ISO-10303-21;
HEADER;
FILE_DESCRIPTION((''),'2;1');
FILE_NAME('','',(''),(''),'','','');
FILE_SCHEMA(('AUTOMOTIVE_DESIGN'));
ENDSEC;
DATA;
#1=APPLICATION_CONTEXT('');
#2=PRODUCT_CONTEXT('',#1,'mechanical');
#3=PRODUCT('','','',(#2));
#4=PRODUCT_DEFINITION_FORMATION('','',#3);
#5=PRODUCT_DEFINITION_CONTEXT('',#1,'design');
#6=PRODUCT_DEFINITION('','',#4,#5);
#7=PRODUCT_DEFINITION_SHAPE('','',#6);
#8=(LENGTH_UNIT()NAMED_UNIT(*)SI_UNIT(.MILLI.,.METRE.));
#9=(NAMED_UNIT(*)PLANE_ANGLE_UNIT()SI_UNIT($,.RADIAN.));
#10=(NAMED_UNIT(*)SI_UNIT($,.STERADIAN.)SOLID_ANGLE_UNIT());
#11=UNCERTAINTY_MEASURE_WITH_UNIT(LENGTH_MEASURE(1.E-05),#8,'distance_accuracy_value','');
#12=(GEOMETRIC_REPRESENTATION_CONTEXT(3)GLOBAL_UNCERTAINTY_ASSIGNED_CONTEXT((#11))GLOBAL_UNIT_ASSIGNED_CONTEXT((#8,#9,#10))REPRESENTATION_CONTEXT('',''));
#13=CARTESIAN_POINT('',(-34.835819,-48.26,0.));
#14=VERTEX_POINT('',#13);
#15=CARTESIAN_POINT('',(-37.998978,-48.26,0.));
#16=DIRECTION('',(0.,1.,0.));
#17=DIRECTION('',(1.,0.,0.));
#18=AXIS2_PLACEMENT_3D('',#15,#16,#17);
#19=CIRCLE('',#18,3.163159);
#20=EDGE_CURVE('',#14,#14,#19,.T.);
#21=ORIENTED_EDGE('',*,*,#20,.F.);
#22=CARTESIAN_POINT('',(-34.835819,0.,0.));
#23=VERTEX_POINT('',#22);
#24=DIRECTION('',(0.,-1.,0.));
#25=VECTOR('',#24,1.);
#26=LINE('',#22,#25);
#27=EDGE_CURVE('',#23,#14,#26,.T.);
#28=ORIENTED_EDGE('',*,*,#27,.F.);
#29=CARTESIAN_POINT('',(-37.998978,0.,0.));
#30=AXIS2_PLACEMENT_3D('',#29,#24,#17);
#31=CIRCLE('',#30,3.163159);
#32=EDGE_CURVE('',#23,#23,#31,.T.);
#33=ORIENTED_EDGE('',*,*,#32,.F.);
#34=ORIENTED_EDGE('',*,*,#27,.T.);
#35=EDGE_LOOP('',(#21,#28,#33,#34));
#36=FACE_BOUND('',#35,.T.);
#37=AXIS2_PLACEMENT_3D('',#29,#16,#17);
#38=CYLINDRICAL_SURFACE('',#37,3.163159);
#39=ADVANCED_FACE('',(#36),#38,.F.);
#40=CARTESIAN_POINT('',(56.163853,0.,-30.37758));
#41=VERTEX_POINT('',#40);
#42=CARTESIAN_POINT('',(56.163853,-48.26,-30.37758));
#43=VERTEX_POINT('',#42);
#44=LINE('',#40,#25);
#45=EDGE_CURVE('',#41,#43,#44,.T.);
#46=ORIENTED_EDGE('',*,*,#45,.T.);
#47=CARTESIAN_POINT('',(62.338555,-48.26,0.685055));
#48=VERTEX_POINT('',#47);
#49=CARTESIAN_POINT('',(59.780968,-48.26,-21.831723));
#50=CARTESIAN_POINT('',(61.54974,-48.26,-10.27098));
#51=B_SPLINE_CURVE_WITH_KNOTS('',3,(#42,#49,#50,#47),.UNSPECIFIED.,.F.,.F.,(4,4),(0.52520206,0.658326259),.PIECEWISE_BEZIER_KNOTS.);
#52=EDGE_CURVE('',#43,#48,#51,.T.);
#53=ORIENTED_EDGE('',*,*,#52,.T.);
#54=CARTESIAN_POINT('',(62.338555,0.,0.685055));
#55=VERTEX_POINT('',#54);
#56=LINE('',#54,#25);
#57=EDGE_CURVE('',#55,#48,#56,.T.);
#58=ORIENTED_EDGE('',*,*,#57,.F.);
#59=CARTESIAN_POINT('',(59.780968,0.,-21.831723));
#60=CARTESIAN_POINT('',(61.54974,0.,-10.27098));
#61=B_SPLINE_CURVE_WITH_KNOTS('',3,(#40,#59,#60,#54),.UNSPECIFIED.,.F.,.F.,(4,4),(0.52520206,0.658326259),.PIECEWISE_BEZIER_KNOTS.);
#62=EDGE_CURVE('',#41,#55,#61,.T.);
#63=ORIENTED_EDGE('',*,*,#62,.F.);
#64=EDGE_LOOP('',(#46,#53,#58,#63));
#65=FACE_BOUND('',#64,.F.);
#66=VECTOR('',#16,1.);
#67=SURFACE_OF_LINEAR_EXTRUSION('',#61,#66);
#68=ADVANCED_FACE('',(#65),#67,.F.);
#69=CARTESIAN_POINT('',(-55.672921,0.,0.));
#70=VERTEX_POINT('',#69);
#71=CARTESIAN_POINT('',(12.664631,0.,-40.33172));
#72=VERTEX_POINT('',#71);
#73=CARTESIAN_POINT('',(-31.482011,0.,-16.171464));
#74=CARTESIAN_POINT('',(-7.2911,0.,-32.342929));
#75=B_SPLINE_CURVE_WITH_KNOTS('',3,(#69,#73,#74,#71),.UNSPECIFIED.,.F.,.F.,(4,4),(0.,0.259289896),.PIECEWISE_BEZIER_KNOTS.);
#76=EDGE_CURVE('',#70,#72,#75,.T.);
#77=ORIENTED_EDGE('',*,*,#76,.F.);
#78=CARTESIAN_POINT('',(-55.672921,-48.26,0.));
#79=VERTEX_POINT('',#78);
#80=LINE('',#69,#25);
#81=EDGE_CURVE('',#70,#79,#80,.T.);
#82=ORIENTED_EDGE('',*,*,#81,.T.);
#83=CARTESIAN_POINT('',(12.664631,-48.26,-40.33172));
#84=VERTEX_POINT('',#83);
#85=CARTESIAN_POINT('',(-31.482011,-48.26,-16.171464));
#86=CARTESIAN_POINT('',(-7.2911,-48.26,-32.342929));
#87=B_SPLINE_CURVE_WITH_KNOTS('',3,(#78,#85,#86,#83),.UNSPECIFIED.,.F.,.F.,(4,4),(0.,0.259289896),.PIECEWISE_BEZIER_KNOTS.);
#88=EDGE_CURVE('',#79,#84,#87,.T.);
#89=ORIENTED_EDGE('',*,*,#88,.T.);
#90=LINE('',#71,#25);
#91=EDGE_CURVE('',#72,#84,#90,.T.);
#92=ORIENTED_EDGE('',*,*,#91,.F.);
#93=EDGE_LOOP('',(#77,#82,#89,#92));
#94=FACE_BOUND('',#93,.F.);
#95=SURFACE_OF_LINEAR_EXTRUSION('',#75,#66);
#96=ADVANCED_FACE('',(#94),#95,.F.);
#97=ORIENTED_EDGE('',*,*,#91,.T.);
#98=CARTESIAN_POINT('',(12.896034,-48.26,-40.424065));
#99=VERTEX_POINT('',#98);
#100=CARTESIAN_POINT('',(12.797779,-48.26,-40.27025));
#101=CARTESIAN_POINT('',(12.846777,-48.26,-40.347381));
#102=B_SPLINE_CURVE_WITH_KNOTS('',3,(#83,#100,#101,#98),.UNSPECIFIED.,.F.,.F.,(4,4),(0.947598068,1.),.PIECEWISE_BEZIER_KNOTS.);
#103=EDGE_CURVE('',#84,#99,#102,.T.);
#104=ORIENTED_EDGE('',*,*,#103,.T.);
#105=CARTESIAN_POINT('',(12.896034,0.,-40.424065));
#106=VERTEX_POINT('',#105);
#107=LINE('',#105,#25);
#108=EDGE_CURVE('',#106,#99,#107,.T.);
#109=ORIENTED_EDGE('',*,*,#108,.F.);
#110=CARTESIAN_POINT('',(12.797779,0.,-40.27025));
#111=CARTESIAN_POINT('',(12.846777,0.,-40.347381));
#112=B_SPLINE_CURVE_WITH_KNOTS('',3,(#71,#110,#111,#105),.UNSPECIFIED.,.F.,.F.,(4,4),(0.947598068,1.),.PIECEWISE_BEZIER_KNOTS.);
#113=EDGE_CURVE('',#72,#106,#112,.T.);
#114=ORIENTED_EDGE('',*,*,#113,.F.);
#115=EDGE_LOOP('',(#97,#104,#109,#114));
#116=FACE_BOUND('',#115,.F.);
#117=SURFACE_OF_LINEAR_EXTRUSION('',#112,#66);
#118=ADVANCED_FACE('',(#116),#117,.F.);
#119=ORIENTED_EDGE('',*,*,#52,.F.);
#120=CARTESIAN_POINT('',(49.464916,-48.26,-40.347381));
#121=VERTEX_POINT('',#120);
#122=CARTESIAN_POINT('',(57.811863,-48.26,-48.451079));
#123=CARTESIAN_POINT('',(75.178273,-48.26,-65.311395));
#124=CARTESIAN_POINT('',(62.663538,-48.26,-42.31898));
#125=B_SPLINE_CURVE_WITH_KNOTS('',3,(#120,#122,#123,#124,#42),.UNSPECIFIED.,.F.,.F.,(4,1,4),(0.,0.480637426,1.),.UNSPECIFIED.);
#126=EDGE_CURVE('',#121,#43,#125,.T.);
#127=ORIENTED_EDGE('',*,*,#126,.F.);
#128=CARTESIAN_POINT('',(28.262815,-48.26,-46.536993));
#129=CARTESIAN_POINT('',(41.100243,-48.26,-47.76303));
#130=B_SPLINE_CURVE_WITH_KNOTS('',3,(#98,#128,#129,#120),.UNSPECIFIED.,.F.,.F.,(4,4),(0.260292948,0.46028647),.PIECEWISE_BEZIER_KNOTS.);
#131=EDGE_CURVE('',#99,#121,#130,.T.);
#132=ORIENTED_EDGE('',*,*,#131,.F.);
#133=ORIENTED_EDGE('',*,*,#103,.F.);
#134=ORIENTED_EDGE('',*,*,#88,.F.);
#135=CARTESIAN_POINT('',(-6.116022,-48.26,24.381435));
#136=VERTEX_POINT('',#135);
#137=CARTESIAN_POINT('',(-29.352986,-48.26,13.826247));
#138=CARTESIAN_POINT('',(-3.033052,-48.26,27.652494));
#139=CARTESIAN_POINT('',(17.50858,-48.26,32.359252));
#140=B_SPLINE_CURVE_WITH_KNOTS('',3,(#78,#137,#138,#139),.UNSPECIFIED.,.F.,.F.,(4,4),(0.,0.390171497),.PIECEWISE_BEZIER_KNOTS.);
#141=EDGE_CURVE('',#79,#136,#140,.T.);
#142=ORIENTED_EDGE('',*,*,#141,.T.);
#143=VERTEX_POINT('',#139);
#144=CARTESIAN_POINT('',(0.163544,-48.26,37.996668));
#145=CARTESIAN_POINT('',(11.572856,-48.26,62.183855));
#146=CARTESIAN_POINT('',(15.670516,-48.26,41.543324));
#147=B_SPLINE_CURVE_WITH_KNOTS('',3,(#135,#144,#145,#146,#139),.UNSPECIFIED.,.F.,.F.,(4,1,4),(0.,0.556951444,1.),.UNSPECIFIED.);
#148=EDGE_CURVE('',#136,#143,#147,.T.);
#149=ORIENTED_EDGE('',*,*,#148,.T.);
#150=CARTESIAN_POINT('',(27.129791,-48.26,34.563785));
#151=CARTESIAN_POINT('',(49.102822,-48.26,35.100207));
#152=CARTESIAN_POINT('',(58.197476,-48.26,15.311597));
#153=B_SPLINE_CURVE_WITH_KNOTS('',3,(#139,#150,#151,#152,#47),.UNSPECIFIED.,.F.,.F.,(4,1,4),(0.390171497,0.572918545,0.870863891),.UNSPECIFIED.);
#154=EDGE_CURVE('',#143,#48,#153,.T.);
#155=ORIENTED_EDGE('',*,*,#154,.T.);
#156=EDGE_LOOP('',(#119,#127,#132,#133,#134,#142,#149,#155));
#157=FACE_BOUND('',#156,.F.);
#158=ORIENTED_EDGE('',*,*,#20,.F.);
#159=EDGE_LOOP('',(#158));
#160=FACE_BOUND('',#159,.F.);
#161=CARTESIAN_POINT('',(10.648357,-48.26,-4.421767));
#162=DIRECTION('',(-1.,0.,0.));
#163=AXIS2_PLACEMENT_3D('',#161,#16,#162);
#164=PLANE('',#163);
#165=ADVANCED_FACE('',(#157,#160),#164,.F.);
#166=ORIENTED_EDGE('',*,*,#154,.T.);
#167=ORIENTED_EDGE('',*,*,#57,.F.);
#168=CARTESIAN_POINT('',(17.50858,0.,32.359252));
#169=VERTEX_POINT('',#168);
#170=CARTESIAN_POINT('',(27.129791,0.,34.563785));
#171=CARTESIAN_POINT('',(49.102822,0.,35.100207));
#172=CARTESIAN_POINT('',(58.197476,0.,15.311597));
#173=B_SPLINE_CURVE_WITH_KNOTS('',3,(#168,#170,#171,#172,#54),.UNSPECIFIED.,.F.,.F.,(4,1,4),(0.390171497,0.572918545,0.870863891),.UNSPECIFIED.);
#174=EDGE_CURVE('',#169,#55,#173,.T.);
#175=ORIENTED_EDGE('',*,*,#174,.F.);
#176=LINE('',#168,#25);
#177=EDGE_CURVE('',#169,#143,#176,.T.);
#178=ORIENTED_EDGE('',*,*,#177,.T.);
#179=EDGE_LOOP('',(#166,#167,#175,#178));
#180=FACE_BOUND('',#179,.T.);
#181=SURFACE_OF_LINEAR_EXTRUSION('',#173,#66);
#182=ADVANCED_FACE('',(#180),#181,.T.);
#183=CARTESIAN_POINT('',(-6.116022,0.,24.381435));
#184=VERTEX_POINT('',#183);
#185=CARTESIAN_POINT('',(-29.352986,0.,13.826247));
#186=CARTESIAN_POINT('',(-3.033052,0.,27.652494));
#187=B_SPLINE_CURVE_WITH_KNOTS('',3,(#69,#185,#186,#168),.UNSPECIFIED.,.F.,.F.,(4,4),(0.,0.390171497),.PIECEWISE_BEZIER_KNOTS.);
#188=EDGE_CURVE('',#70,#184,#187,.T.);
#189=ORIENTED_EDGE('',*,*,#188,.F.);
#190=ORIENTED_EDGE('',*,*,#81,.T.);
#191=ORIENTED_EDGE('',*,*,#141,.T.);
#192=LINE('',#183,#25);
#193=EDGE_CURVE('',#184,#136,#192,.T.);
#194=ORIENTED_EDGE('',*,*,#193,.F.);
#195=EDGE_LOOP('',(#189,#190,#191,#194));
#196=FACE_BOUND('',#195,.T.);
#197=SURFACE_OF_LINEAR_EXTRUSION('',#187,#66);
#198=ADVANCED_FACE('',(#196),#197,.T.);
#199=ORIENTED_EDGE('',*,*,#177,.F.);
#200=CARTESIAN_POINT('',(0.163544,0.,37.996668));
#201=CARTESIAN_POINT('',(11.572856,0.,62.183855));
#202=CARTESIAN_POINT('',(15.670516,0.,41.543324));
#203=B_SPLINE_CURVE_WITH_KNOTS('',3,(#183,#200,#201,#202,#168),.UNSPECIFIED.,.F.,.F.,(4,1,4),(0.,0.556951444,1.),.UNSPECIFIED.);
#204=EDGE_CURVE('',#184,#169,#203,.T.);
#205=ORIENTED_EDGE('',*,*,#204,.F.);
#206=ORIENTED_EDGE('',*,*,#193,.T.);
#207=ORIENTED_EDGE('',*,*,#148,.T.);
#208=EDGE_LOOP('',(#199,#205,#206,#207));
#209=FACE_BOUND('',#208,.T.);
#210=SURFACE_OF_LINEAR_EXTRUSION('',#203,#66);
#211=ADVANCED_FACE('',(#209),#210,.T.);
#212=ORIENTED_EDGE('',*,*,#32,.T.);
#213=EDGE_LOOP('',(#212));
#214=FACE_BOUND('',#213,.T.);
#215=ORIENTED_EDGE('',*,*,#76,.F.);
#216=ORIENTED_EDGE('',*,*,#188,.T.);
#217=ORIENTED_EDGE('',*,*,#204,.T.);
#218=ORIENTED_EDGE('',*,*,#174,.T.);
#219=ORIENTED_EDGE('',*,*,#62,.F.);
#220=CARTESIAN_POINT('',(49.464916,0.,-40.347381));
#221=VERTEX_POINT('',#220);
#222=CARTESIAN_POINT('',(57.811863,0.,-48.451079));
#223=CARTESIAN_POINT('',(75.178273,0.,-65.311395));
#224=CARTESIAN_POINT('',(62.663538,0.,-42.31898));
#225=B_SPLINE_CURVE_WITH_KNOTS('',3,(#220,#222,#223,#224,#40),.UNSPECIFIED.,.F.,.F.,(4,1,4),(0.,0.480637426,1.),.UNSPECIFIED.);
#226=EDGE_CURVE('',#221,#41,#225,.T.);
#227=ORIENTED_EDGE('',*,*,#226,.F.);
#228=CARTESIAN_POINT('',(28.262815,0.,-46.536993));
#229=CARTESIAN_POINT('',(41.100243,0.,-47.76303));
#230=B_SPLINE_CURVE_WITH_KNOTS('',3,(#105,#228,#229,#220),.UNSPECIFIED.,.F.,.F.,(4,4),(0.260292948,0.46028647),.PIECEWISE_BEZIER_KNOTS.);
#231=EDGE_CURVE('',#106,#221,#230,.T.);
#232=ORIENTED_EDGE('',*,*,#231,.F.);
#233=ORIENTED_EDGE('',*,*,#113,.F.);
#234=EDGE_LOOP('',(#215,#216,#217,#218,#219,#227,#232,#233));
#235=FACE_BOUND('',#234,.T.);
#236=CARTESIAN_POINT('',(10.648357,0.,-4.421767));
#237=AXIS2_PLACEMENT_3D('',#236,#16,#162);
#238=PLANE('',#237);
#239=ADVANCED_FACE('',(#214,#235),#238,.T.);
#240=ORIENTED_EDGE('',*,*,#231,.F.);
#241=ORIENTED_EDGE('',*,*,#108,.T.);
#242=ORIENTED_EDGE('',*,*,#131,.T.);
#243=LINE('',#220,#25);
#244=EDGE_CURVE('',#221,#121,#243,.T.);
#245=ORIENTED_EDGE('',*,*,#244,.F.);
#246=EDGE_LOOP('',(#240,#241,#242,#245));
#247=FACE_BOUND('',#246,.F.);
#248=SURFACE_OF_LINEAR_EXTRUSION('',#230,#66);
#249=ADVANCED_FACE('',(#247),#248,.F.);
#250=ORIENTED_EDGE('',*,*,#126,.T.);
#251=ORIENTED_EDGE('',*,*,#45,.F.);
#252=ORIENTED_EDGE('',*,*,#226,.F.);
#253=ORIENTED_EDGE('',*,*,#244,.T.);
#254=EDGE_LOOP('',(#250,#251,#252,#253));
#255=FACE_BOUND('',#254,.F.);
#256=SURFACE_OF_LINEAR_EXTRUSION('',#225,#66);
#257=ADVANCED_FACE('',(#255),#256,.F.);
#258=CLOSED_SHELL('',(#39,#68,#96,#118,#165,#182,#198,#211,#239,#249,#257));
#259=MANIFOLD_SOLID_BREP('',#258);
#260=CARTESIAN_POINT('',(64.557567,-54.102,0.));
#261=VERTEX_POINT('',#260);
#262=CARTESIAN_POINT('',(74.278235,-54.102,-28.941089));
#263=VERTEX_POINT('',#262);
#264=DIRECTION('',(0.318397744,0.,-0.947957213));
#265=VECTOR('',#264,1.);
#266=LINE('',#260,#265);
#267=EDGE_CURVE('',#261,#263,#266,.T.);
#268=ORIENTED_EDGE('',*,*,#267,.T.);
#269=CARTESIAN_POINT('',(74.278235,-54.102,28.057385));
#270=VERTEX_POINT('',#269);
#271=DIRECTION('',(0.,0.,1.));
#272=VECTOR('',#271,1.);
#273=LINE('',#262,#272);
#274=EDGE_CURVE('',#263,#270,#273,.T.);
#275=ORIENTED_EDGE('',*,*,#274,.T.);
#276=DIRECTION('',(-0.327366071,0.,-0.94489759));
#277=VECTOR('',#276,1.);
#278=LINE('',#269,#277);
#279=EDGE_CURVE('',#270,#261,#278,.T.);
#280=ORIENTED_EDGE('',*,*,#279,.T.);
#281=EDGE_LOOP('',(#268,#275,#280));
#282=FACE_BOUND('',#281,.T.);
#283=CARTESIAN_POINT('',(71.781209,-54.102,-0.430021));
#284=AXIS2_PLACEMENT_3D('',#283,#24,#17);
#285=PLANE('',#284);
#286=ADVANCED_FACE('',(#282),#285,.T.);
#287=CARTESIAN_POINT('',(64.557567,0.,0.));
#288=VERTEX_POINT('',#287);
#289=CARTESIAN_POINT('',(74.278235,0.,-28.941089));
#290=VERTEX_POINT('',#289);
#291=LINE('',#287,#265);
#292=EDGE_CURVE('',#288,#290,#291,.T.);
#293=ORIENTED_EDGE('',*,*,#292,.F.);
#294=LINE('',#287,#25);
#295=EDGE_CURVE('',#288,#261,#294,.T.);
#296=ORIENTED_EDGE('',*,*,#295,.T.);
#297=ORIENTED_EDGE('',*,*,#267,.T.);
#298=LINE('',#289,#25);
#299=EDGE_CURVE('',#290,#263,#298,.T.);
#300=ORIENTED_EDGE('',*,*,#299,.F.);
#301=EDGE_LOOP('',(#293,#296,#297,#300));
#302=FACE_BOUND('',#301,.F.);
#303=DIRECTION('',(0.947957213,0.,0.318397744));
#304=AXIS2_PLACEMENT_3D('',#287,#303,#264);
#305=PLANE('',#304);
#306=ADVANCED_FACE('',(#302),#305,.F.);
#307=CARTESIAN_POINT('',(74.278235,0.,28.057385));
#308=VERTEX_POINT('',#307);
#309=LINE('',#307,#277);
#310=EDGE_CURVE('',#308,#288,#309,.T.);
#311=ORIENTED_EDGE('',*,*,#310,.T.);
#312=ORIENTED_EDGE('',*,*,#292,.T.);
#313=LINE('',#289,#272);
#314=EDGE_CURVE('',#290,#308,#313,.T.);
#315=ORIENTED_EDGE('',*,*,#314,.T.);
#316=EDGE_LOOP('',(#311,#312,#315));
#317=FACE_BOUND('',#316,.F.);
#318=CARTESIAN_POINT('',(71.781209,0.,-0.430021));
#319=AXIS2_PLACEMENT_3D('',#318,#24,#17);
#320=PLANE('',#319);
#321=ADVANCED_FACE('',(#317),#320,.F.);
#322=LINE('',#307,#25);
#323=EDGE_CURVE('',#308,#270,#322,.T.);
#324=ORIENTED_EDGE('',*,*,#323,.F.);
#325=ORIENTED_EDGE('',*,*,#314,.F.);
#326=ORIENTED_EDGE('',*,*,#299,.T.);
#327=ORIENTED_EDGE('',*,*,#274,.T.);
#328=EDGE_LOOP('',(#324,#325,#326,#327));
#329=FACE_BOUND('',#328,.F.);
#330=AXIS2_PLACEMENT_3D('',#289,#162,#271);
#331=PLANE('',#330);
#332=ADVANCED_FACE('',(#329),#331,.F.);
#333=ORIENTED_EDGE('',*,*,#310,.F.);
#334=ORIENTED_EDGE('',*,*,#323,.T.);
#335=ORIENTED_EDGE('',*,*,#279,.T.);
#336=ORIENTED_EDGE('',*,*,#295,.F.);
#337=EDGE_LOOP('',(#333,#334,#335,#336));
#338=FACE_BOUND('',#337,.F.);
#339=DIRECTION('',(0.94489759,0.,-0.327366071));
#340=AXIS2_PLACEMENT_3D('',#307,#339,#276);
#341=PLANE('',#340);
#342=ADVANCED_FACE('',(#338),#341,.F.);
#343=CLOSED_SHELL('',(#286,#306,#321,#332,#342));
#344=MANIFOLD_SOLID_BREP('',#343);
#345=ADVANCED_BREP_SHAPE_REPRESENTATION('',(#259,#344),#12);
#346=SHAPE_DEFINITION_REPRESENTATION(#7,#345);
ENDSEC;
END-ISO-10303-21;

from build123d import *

# Parameters (mm, degrees)
F1_DEPTH = 48.26
F2_R     = 3.163158907
F3_DEPTH = 219.202
F7_DEPTH = 54.102


# Not quite as in the source:
# - the program builds the solid bodies; features that only make, move or delete a surface that nothing else refers to are left out


with BuildPart() as f1:
    # F0 (on Front) → F1 (new body)
    with BuildSketch(Plane.XZ):
        with BuildLine():
            add(Edge.make_bspline(
                [(-55.6729212403, 0), (-38.6311113221, 8.9523120314), (-21.5893014039, 17.9046240629), (-6.1160224097, 24.3814345232)],
                knots=[0, 0, 0, 0, 0.2526308872, 0.2526308872, 0.2526308872, 0.2526308872], degree=3))
            add(Edge.make_bspline(
                [(-55.6729212403, 0), (-31.4820105475, -16.1714644762), (-7.2910998546, -32.3429289523), (12.6646309673, -40.3317198143)],
                knots=[0, 0, 0, 0, 0.2592898959, 0.2592898959, 0.2592898959, 0.2592898959], degree=3))
            add(Edge.make_bspline(
                [(12.6646309673, -40.3317198143), (12.7977790108, -40.2702503671), (12.8467772947, -40.3473806791), (12.8960343857, -40.4240649186)],
                knots=[0.9475980683, 0.9475980683, 0.9475980683, 0.9475980683, 1, 1, 1, 1], degree=3))
            add(Edge.make_bspline(
                [(12.8960343857, -40.4240649186), (28.2628150861, -46.5369934422), (41.10024341, -47.763030362), (49.4649163881, -40.3473806791)],
                knots=[0.2602929484, 0.2602929484, 0.2602929484, 0.2602929484, 0.4602864698, 0.4602864698, 0.4602864698, 0.4602864698], degree=3))
            add(Edge.make_bspline(
                [(49.4649163881, -40.3473806791), (50.5850376596, -39.3543440149), (53.1057014839, -36.5716905465), (55.1277076242, -32.8255943911), (56.1638529866, -30.3775797313)],
                knots=[0.4602864698, 0.4602864698, 0.4602864698, 0.4602864698, 0.4870677915, 0.5252020603, 0.5252020603, 0.5252020603, 0.5252020603], degree=3))
            add(Edge.make_bspline(
                [(56.1638529866, -30.3775797313), (59.780967595, -21.8317232251), (61.5497398481, -10.2709798617), (62.3385554338, 0.6850550301)],
                knots=[0.5252020603, 0.5252020603, 0.5252020603, 0.5252020603, 0.658326259, 0.658326259, 0.658326259, 0.658326259], degree=3))
            add(Edge.make_bspline(
                [(17.5085796013, 32.359251714), (27.1297909673, 34.5637852704), (49.1028218124, 35.1002074944), (58.1974759597, 15.3115973831), (62.3385554338, 0.6850550301)],
                knots=[0.3901714972, 0.3901714972, 0.3901714972, 0.3901714972, 0.5729185448, 0.8708638911, 0.8708638911, 0.8708638911, 0.8708638911], degree=3))
            add(Edge.make_bspline(
                [(-6.1160224097, 24.3814345232), (2.3081424102, 27.9076243402), (10.2673831039, 30.7000572468), (17.5085796013, 32.359251714)],
                knots=[0.2526308872, 0.2526308872, 0.2526308872, 0.2526308872, 0.3901714972, 0.3901714972, 0.3901714972, 0.3901714972], degree=3))
        make_face()
        with BuildLine():
            add(Edge.make_bspline(
                [(-6.1160224097, 24.3814345232), (0.1635435456, 37.996667677), (11.5728562583, 62.1838548689), (15.6705155598, 41.5433244951), (17.5085796013, 32.359251714)],
                knots=[0, 0, 0, 0, 0.556951444, 1, 1, 1, 1], degree=3))
            add(Edge.make_bspline(
                [(-6.1160224097, 24.3814345232), (2.3081424102, 27.9076243402), (10.2673831039, 30.7000572468), (17.5085796013, 32.359251714)],
                knots=[0.2526308872, 0.2526308872, 0.2526308872, 0.2526308872, 0.3901714972, 0.3901714972, 0.3901714972, 0.3901714972], degree=3))
        make_face()
        with BuildLine():
            add(Edge.make_bspline(
                [(49.4649163881, -40.3473806791), (50.5850376596, -39.3543440149), (53.1057014839, -36.5716905465), (55.1277076242, -32.8255943911), (56.1638529866, -30.3775797313)],
                knots=[0.4602864698, 0.4602864698, 0.4602864698, 0.4602864698, 0.4870677915, 0.5252020603, 0.5252020603, 0.5252020603, 0.5252020603], degree=3))
            add(Edge.make_bspline(
                [(49.4649163881, -40.3473806791), (57.8118629624, -48.4510792467), (75.1782729057, -65.3113945884), (62.6635379474, -42.3189795748), (56.1638529866, -30.3775797313)],
                knots=[0, 0, 0, 0, 0.480637426, 1, 1, 1, 1], degree=3))
        make_face()
    extrude(amount=F1_DEPTH)

    # F2 (on Front) → F3 (cut)
    with BuildSketch(Plane.XZ):
        with Locations((-37.9989780486, 0)):
            Circle(F2_R)
    extrude(amount=F3_DEPTH, mode=Mode.SUBTRACT)


with BuildPart() as f7:
    # F4 (on Front) → F7 (new body)
    with BuildSketch(Plane.XZ):
        Polygon((74.2782354355, 28.057385236), (64.5575672388, 0), (74.2782354355, -28.9410892874), align=None)
    extrude(amount=F7_DEPTH)


solid = Compound([f1.part, f7.part])
